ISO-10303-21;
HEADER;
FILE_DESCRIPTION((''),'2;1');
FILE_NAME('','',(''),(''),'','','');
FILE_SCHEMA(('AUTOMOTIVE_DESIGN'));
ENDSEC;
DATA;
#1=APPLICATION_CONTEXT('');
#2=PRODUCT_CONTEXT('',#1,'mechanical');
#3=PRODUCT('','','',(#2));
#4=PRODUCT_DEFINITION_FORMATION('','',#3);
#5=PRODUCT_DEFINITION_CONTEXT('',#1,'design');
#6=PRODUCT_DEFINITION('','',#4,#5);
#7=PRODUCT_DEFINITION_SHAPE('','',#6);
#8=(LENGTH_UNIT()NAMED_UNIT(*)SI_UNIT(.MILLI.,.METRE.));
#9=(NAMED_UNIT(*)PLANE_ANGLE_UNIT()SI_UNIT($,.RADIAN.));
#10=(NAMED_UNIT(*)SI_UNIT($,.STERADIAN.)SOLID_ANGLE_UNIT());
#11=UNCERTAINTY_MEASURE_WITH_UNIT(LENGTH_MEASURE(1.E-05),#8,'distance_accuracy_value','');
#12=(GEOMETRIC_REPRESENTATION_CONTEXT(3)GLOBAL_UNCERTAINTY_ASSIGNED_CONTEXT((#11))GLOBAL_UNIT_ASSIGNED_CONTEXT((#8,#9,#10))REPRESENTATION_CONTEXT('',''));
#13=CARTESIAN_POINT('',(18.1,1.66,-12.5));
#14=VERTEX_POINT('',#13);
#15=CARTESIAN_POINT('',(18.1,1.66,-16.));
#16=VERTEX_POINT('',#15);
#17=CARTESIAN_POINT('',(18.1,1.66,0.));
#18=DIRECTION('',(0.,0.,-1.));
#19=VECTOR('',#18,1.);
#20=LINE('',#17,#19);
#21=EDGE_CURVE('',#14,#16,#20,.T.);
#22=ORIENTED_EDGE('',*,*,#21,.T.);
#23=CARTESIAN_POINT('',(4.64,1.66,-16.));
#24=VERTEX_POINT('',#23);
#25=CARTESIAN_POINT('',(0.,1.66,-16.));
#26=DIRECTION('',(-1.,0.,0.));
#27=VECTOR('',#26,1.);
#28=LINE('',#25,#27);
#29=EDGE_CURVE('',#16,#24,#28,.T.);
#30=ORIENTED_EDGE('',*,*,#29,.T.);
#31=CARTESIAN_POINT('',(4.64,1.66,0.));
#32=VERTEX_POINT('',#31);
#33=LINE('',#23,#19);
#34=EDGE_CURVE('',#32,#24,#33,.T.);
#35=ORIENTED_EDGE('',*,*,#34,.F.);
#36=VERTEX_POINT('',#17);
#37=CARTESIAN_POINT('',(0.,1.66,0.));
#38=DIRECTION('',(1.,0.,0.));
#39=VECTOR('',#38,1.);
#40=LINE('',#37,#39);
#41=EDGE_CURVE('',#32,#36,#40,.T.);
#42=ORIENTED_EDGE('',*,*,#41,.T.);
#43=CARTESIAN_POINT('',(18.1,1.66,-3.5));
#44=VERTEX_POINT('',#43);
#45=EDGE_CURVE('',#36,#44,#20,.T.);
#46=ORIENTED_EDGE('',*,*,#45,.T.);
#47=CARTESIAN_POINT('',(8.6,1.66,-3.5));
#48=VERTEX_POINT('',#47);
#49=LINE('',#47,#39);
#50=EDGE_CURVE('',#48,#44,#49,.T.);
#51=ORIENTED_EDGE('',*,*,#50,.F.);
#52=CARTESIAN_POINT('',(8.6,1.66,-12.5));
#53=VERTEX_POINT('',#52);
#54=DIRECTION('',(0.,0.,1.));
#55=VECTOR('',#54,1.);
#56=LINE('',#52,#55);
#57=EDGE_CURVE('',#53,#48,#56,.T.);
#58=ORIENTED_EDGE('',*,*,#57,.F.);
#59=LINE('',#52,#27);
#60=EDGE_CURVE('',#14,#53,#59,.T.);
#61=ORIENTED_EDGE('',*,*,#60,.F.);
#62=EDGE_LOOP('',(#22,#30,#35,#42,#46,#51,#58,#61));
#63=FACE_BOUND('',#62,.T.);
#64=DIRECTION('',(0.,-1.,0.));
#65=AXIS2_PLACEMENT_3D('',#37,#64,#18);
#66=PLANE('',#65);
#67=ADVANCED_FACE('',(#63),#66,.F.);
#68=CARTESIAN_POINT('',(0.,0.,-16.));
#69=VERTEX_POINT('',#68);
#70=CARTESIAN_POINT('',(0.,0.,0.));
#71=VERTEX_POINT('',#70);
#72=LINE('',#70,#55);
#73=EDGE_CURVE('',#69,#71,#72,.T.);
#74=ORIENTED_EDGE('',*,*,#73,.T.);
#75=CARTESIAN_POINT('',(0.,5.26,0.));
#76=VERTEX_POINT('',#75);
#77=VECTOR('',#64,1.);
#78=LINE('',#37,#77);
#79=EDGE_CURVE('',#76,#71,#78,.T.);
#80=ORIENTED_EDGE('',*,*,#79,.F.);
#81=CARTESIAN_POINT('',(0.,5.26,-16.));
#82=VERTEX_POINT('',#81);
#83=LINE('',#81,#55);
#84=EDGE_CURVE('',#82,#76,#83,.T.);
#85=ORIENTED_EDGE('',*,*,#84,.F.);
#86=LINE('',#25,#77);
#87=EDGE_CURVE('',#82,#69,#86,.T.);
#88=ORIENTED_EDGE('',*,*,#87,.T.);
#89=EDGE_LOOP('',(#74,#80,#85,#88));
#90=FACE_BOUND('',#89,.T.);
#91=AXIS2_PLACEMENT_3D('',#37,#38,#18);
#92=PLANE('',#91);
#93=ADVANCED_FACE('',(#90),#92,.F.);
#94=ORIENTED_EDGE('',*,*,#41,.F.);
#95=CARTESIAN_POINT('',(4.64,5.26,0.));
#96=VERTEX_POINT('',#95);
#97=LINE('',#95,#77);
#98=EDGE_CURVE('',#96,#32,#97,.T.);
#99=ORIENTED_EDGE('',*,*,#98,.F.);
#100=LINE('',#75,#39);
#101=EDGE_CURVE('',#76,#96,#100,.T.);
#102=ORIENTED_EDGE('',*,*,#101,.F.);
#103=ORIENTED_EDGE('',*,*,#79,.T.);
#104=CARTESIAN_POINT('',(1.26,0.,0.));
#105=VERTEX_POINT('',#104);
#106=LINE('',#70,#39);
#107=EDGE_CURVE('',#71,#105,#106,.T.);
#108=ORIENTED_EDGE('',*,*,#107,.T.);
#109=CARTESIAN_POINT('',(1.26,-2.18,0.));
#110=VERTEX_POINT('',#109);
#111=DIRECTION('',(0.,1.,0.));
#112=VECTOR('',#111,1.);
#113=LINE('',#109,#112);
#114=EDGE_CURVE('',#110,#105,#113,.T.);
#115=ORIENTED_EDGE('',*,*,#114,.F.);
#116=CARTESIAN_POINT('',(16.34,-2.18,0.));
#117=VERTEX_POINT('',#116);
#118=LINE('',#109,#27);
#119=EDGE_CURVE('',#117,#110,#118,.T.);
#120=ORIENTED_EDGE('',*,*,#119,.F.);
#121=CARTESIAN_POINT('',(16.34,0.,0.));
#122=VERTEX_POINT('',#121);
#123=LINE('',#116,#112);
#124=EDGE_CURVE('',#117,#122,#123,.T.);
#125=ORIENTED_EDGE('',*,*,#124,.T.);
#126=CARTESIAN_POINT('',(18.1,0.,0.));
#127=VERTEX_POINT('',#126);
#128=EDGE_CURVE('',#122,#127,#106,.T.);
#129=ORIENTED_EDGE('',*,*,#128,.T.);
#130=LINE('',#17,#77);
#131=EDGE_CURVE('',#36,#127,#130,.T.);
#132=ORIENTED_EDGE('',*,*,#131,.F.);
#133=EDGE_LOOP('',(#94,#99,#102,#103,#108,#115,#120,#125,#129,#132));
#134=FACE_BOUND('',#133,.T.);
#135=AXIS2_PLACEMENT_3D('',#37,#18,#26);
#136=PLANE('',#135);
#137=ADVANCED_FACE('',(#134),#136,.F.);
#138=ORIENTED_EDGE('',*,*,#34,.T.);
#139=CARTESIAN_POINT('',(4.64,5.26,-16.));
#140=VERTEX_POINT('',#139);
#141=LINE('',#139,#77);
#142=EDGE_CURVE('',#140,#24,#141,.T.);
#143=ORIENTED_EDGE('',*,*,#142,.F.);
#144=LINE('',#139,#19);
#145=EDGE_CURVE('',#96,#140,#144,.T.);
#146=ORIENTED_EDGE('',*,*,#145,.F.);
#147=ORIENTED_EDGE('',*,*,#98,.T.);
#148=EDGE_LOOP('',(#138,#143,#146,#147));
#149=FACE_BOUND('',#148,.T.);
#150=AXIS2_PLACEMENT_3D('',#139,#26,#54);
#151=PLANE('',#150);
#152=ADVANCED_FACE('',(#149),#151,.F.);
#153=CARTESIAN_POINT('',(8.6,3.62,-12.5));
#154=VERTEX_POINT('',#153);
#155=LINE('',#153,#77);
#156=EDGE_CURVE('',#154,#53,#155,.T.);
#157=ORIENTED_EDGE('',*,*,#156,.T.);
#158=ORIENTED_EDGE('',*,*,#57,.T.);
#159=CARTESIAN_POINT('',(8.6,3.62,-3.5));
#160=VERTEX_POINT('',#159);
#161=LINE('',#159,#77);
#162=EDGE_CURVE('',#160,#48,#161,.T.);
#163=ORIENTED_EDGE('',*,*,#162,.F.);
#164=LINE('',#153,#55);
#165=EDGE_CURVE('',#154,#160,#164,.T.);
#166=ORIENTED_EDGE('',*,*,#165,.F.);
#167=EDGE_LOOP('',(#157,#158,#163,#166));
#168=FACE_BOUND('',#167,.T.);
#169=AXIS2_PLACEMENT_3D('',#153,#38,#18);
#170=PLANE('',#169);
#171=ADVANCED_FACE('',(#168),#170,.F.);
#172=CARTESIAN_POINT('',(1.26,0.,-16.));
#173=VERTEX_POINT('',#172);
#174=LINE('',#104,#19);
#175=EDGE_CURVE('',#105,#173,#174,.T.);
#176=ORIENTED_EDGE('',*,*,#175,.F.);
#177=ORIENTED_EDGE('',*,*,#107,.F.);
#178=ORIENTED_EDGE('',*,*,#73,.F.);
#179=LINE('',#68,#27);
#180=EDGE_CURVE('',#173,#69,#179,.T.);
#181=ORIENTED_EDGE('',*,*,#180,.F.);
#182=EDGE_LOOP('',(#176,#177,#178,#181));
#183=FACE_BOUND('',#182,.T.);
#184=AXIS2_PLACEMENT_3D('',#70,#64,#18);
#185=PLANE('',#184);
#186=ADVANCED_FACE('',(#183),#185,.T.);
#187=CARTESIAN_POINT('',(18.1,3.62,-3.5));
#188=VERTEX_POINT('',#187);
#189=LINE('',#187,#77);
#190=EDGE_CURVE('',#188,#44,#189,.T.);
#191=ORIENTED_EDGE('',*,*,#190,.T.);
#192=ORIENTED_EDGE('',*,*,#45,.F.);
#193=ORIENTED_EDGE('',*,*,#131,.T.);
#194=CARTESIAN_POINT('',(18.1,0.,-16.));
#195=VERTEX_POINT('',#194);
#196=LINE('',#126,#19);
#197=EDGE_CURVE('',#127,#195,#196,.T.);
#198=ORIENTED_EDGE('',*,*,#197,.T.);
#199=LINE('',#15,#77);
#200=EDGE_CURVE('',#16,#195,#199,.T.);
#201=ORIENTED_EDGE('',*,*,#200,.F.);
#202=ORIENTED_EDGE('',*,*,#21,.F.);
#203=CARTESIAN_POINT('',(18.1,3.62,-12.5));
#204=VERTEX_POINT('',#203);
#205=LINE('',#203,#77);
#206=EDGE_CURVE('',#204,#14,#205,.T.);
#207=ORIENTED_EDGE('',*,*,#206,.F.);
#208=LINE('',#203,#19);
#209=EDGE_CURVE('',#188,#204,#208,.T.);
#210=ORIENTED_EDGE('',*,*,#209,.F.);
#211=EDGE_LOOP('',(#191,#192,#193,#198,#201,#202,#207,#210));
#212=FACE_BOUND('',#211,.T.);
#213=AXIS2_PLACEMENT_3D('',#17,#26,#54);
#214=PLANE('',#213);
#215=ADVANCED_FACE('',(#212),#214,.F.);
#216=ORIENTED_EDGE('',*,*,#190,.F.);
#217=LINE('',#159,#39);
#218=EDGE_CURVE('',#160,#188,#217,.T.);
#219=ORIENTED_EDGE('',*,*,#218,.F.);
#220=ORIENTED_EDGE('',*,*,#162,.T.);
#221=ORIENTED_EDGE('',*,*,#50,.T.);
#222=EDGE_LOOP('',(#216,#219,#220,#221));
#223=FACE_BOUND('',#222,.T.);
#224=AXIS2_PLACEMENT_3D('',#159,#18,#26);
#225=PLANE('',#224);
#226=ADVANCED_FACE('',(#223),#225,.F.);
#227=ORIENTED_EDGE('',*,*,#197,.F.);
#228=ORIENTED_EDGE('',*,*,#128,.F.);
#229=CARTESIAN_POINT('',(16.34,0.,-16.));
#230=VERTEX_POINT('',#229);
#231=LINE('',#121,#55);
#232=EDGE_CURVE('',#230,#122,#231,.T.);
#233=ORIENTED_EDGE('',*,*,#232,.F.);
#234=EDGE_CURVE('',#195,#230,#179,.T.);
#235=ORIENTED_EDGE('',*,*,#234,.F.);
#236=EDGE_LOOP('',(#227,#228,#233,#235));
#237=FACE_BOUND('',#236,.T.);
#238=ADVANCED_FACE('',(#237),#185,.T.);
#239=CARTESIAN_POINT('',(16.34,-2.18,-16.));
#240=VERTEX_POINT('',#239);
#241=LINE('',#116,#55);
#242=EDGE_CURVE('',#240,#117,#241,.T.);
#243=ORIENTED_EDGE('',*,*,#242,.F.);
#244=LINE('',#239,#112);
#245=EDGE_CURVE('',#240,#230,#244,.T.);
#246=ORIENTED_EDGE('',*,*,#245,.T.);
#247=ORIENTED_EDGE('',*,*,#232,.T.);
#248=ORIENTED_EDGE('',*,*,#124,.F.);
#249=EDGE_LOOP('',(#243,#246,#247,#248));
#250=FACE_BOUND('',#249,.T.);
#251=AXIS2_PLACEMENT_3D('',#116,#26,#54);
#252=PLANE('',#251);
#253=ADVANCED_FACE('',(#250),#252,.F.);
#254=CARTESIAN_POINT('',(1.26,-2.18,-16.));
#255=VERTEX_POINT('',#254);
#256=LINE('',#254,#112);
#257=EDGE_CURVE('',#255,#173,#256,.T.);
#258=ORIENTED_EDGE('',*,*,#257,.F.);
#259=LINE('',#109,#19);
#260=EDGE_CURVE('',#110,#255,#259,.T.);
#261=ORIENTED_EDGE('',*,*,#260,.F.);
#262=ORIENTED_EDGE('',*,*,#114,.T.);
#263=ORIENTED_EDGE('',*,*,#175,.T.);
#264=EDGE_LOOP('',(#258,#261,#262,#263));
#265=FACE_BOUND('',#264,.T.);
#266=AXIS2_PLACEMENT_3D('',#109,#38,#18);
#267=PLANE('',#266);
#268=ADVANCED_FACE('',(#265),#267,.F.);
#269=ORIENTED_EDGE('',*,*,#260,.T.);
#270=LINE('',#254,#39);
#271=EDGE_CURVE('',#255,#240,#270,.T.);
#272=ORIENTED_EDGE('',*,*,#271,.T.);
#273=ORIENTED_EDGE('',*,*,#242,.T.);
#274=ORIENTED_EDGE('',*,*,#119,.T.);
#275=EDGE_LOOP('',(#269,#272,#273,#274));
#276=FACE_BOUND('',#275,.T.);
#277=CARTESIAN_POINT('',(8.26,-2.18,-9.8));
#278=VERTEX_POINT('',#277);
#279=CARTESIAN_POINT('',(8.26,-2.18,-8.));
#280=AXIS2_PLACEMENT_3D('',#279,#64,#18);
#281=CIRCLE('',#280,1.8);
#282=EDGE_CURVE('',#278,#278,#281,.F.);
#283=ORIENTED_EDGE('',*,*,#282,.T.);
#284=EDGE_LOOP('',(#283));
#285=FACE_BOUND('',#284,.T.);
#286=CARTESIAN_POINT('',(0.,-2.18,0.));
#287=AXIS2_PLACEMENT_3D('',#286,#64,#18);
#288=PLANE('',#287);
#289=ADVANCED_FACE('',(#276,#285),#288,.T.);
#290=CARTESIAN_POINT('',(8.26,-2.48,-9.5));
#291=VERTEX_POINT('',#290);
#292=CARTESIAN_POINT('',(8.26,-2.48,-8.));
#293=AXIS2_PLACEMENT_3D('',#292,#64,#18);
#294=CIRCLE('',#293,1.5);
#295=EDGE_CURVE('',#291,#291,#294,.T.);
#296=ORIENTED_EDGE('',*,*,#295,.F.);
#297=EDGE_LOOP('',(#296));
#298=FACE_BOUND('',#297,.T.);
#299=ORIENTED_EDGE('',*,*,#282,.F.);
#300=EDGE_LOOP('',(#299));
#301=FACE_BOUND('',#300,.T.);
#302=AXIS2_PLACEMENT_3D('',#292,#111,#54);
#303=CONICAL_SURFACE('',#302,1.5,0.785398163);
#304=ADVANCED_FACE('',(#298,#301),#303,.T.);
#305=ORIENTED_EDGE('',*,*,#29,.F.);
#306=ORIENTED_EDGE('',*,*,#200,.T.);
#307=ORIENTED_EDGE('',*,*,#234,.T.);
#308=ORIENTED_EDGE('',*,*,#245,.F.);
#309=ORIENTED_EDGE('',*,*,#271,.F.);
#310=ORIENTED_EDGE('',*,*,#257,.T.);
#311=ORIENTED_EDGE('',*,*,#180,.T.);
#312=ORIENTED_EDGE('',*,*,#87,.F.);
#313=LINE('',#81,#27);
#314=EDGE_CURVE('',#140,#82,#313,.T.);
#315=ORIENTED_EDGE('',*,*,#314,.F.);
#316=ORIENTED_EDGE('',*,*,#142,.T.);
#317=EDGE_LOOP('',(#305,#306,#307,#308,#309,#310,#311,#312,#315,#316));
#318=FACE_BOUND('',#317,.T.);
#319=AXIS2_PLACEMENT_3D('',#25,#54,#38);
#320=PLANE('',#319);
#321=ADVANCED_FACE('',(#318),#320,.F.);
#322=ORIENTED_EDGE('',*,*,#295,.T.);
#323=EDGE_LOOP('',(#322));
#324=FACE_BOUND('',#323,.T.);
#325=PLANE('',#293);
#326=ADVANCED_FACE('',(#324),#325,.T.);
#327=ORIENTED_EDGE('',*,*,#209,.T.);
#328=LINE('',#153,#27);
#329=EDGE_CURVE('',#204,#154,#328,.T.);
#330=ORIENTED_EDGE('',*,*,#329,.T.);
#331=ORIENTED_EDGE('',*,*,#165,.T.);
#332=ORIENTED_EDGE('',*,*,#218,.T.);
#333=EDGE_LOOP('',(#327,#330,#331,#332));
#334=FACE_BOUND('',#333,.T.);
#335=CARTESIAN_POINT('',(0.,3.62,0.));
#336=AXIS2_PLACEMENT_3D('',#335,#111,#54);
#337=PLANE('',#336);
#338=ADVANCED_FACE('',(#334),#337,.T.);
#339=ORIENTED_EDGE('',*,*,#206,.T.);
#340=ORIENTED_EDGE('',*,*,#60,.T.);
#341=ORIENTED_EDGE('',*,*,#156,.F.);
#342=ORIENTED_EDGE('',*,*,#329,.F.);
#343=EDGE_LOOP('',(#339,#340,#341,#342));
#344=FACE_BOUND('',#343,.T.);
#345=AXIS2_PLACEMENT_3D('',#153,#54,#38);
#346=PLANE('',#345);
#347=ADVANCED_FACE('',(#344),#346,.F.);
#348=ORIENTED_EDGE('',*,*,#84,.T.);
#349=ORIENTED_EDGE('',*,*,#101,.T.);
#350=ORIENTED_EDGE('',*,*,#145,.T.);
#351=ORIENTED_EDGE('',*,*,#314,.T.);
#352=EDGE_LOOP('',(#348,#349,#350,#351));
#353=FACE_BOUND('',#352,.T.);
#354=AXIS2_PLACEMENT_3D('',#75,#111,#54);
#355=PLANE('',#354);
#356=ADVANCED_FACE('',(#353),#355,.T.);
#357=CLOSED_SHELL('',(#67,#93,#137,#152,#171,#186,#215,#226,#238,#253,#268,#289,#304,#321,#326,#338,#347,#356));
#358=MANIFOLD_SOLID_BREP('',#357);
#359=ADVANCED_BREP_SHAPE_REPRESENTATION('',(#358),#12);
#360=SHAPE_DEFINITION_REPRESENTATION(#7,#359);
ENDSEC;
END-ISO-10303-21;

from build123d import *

# Parameters (mm, degrees)
SKETCH_1_W      = 18.1
SKETCH_1_H      = 16
EXTRUDE_1_DEPTH = 1.66
SKETCH_2_W      = 15.08
SKETCH_2_H      = 16
EXTRUDE_2_DEPTH = 2.18
SKETCH_3_W      = 9.5
SKETCH_3_H      = 9
EXTRUDE_3_DEPTH = 1.96
SKETCH_4_W      = 4.64
SKETCH_4_H      = 16
EXTRUDE_4_DEPTH = 3.6
SKETCH_5_R      = 1.5
EXTRUDE_5_DEPTH = 0.3
CHAMFER_1_SIZE  = 0.3


with BuildPart() as part:
    # 草图1 → 凸台-拉伸1 (new body)
    with BuildSketch(Plane(origin=(0, 0, 0), x_dir=(1, 0, 0), z_dir=(0, 1, 0))):
        with Locations((9.05, 8)):
            Rectangle(SKETCH_1_W, SKETCH_1_H)
    extrude(amount=EXTRUDE_1_DEPTH)

    # 草图2 → 凸台-拉伸2 (add)
    with BuildSketch(Plane.XZ):
        with Locations((8.8, -8)):
            Rectangle(SKETCH_2_W, SKETCH_2_H)
    extrude(amount=EXTRUDE_2_DEPTH)

    # 草图3 → 凸台-拉伸3 (add)
    with BuildSketch(Plane(origin=(0, 1.66, 0), x_dir=(1, 0, 0), z_dir=(0, 1, 0))):
        with Locations((13.35, 8)):
            Rectangle(SKETCH_3_W, SKETCH_3_H)
    extrude(amount=EXTRUDE_3_DEPTH)

    # 草图4 → 凸台-拉伸4 (add)
    with BuildSketch(Plane(origin=(0, 1.66, 0), x_dir=(1, 0, 0), z_dir=(0, 1, 0))):
        with Locations((2.32, 8)):
            Rectangle(SKETCH_4_W, SKETCH_4_H)
    extrude(amount=EXTRUDE_4_DEPTH)

    # 草图5 → 凸台-拉伸5 (add)
    with BuildSketch(Plane.XZ.offset(2.18)):
        with Locations(Location((8.26, -8, 0), (0, 0, 270))):
            Circle(SKETCH_5_R)
    extrude(amount=EXTRUDE_5_DEPTH)

    # 倒角1
    chamfer_1_edges = [part.edges().sort_by_distance(p)[0] for p in [
        (8.26, -2.18, -6.5),
    ]]
    chamfer(chamfer_1_edges, length=CHAMFER_1_SIZE - 0.0001)  # a hair under: the kernel refuses the full size


solid = part.part
